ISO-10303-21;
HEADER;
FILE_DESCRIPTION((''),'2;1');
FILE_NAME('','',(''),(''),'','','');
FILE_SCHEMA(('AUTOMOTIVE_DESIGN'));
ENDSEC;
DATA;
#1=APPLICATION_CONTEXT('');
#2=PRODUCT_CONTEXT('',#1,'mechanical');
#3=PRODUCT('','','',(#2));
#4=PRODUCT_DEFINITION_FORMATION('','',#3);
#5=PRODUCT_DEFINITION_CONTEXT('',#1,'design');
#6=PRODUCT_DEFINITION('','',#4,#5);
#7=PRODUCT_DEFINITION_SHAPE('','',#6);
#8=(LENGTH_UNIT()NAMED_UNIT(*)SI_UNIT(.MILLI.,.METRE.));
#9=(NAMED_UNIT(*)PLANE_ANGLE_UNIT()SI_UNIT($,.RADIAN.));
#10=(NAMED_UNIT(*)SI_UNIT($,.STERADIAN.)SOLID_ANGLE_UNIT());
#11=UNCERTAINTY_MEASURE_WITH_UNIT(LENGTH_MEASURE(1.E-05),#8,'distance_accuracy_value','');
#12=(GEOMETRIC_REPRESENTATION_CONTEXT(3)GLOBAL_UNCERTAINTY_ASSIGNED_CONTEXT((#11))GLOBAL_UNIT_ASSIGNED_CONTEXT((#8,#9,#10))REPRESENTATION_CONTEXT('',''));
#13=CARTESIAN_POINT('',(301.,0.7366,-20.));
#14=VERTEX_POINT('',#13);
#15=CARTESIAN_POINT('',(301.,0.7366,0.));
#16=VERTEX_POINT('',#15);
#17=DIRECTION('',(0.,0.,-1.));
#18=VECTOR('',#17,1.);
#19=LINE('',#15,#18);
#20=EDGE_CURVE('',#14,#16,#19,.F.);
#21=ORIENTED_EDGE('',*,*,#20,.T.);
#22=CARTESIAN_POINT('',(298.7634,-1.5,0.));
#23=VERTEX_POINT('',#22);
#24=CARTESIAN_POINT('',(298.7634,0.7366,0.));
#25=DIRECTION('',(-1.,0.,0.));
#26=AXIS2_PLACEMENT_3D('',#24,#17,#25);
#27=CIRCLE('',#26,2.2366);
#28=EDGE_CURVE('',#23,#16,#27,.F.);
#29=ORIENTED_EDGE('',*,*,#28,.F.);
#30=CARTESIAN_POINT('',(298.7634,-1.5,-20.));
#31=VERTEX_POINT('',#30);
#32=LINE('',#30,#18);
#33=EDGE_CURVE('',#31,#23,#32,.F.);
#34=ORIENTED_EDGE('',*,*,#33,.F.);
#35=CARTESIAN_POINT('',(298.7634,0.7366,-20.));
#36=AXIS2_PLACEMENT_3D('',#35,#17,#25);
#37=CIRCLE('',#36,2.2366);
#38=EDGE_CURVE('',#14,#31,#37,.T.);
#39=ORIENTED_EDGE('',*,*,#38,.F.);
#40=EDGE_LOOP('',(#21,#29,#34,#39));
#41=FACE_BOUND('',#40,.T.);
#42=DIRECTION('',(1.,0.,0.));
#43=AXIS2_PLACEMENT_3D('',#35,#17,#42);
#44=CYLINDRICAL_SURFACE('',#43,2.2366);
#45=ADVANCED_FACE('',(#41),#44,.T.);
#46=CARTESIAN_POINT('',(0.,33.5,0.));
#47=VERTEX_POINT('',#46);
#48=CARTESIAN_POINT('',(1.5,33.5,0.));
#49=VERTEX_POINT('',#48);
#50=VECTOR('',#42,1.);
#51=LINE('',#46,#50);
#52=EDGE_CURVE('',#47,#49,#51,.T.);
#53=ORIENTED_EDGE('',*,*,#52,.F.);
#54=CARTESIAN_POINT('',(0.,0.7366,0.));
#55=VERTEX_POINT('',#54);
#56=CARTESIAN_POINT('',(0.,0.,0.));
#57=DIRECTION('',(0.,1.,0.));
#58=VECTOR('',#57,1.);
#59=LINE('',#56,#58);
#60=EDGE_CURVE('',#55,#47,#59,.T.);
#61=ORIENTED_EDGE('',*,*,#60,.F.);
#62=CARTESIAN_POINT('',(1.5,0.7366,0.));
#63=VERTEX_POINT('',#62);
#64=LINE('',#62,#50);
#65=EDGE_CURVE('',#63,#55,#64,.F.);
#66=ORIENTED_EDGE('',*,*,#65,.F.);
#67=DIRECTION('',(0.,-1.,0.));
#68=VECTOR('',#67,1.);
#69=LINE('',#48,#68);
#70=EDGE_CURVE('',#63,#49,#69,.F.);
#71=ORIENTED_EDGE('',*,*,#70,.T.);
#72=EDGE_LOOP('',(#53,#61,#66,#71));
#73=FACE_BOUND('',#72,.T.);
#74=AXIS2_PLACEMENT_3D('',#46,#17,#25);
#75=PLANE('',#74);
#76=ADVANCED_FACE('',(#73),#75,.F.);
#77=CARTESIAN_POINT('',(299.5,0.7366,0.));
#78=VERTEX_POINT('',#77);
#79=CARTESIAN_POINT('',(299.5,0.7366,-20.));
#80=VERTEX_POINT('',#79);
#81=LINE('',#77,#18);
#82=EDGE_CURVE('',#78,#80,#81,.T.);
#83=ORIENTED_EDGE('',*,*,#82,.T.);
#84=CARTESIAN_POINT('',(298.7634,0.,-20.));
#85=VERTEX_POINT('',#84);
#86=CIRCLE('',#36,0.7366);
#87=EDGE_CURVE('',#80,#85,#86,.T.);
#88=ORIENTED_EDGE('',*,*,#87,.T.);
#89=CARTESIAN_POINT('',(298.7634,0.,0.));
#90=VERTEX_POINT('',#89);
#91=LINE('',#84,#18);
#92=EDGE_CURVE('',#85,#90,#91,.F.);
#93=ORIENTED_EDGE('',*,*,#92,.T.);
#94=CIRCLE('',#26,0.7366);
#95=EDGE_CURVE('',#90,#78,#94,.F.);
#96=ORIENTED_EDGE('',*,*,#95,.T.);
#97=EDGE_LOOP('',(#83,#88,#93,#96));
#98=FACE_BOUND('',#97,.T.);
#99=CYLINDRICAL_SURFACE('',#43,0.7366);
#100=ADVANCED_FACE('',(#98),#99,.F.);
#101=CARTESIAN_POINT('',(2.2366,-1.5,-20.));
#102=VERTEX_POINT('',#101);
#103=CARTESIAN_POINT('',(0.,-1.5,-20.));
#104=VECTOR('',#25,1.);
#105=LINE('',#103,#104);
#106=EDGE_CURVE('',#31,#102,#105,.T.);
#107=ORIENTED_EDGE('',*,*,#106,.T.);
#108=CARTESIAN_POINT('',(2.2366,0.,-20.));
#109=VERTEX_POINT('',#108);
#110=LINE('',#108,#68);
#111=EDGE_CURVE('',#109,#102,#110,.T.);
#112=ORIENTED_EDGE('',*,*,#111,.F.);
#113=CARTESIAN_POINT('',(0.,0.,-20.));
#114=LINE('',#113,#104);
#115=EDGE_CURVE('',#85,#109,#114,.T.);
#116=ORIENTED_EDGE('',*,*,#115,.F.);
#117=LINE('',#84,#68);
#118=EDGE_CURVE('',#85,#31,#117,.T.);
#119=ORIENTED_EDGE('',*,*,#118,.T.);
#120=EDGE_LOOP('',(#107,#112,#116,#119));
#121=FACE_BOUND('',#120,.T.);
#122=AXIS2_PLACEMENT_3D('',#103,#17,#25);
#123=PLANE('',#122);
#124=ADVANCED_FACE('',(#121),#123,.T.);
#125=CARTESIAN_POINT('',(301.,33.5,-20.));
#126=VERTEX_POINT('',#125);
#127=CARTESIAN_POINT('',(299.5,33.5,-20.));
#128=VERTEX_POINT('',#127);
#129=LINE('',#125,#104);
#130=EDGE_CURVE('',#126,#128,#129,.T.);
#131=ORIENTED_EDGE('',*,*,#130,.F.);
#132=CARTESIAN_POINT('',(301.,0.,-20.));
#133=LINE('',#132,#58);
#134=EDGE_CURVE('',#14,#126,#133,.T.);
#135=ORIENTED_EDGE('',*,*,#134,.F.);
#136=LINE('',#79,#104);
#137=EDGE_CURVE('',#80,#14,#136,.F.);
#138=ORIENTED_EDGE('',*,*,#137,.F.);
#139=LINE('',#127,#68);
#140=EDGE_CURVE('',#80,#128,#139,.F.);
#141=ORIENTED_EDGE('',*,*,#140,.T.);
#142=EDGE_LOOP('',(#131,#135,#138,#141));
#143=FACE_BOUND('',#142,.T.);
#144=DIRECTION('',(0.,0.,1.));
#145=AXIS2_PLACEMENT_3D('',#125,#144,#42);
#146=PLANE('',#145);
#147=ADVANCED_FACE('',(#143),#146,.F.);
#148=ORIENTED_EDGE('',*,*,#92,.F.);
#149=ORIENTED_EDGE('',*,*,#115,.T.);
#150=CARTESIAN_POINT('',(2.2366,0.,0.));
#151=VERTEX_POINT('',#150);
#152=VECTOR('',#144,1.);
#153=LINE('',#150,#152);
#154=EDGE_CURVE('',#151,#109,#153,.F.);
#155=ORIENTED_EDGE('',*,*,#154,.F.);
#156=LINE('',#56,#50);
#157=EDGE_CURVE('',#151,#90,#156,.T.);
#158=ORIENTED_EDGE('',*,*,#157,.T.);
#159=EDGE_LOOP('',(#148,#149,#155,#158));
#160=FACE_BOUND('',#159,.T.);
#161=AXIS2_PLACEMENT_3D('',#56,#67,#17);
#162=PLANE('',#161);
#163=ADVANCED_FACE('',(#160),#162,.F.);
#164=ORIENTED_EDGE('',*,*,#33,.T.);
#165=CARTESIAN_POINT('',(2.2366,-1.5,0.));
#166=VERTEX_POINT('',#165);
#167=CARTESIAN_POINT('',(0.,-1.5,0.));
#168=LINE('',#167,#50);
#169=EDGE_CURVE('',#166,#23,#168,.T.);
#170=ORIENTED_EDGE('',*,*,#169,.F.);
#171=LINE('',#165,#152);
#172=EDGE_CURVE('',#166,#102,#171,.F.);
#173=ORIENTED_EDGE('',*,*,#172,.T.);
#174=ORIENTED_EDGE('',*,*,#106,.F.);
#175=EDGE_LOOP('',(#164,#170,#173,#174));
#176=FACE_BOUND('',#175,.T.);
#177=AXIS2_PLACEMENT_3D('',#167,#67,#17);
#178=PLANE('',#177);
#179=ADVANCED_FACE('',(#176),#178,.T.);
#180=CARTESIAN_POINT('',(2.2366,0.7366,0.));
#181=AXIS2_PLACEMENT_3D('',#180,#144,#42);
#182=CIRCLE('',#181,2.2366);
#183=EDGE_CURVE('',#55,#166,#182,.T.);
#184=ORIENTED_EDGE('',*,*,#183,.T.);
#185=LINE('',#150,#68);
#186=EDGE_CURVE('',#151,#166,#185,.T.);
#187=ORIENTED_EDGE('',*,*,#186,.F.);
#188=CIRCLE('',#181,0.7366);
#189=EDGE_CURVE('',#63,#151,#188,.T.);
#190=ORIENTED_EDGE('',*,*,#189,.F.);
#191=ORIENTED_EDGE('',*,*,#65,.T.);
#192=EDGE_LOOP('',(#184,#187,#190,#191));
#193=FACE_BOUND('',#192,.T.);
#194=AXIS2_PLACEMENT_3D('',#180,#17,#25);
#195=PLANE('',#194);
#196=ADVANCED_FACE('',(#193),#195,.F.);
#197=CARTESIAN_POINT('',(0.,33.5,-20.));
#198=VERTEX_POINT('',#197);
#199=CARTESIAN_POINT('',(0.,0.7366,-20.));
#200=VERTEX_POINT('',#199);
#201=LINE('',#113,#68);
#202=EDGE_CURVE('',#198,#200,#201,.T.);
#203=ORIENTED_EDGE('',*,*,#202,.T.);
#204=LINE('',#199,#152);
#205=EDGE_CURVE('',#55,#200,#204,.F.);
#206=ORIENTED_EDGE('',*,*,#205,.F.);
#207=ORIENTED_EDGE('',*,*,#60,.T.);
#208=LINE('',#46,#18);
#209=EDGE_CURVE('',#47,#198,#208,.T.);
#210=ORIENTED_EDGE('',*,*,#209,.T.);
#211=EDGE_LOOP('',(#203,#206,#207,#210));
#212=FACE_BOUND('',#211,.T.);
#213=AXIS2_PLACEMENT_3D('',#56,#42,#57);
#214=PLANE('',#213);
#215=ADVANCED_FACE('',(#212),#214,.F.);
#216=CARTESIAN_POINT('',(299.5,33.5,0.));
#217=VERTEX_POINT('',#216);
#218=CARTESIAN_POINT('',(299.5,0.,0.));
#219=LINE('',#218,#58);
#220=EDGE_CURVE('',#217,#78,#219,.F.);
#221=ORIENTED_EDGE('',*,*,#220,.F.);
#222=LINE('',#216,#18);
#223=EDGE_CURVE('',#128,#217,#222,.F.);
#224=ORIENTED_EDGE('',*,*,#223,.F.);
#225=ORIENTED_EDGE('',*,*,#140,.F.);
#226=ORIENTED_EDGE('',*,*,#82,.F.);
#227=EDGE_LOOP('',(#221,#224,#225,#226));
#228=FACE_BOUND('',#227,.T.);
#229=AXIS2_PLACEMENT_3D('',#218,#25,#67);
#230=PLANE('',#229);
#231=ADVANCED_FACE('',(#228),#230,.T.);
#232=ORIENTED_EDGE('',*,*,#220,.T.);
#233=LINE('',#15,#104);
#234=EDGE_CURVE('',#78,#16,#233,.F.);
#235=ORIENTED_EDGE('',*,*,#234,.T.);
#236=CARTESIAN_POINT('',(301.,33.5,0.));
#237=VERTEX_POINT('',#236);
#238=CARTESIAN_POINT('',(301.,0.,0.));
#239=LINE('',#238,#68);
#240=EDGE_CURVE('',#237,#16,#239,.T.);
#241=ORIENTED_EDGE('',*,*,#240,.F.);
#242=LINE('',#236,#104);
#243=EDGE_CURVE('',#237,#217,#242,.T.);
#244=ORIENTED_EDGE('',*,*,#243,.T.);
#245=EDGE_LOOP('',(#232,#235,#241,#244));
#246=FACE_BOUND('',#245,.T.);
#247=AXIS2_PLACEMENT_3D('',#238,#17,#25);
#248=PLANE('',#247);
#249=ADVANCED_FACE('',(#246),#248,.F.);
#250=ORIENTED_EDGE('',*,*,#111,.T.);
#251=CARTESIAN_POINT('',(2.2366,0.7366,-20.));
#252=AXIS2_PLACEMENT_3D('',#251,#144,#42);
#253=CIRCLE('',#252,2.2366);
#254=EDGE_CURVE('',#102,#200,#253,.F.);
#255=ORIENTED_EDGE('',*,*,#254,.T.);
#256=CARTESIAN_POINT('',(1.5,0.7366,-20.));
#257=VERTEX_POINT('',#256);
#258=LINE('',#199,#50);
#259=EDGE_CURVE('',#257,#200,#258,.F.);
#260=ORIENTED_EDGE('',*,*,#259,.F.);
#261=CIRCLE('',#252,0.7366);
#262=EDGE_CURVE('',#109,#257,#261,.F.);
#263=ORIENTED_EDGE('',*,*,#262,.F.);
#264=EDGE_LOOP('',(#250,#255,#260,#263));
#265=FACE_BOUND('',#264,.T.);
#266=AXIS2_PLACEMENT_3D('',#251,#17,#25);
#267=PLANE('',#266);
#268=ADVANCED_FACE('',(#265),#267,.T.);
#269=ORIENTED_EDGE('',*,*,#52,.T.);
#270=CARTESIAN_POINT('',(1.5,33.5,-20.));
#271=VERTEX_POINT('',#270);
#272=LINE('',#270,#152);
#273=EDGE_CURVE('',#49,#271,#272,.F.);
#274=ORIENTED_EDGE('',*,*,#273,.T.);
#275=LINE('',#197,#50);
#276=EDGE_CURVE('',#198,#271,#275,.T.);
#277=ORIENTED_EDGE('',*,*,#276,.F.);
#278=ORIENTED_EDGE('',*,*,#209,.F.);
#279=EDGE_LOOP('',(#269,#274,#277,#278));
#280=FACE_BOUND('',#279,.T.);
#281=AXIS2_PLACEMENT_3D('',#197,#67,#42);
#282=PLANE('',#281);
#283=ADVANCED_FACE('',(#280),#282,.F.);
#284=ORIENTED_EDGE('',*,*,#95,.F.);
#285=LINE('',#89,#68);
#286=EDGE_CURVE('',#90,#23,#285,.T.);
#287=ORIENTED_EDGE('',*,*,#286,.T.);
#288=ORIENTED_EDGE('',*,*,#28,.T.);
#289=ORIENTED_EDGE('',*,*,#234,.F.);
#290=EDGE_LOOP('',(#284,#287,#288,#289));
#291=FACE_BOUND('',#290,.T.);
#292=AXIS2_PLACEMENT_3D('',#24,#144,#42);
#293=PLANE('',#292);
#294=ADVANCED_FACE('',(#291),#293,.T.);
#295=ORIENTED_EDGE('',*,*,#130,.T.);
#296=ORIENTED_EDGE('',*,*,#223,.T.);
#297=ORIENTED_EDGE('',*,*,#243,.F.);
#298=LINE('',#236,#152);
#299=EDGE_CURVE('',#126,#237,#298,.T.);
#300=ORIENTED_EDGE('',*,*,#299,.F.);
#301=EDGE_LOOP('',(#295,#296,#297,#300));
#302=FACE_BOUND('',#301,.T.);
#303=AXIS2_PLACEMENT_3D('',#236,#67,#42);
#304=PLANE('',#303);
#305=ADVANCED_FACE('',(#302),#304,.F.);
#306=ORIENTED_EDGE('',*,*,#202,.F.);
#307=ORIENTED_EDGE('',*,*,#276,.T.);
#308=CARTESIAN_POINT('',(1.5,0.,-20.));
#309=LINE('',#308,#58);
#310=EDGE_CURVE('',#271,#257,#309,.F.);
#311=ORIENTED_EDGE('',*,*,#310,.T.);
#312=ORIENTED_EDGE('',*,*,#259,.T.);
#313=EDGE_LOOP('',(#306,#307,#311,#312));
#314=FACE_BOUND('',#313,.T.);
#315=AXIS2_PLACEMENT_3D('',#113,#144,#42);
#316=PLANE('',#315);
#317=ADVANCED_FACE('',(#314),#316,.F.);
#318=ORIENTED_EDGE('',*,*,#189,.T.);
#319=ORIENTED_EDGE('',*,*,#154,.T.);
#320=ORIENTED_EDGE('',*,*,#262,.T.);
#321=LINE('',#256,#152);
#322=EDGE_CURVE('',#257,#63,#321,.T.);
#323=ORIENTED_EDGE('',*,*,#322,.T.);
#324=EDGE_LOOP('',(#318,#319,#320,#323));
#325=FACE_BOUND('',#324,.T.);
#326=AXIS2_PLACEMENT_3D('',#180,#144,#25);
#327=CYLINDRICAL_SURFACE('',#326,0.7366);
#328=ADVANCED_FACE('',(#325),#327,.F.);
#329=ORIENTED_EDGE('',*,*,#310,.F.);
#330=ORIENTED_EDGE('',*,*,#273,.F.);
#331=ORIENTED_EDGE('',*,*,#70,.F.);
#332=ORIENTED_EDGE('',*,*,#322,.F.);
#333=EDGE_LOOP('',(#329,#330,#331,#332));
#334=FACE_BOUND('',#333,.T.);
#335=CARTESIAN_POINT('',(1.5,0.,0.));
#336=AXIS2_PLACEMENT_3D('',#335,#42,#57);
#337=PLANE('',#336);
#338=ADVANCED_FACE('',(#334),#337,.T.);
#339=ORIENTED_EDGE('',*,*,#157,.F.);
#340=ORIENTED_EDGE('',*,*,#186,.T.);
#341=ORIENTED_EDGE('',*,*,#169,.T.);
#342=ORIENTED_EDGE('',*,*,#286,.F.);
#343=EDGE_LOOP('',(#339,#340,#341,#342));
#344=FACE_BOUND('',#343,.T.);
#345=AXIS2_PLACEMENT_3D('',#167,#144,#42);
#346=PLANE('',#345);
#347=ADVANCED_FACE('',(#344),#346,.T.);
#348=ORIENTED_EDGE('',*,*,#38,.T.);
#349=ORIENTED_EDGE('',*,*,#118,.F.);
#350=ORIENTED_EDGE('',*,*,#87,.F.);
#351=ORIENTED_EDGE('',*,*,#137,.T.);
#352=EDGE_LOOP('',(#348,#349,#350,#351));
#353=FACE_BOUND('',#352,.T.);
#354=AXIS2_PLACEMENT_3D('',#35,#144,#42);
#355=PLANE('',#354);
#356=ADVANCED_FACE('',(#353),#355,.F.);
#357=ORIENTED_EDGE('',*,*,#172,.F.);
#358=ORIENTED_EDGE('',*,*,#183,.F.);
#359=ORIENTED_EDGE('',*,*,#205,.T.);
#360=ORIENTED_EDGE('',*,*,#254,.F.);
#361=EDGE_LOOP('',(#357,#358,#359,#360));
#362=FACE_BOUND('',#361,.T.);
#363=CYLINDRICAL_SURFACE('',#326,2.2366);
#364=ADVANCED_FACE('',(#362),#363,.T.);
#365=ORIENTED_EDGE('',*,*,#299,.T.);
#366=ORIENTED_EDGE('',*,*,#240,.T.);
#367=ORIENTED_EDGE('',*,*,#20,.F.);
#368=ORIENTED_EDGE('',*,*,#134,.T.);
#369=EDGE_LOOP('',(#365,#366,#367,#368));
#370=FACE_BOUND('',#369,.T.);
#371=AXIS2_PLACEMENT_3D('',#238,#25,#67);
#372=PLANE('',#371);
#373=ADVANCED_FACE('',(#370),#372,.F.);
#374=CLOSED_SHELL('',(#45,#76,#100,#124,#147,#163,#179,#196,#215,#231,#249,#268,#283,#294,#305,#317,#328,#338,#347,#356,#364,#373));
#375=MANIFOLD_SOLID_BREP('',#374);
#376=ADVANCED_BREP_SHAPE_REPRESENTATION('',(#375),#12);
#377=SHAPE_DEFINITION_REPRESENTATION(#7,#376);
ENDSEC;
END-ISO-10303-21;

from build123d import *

# Parameters (mm, degrees)
SKETCH_1_W                       = 301
SKETCH_1_H                       = 20
SM_BASE_FLANGE_1_DEPTH           = 1.5
SM_EDGE_FLANGE_1_STRIP_W         = 7.4732
SM_EDGE_FLANGE_1_STRIP_H         = 1.5
SM_EDGE_FLANGE_1_STRIP_CUT_DEPTH = 20
SM_EDGE_FLANGE_1_DEPTH           = 20
SM_EDGE_FLANGE_2_STRIP_W         = 7.4732
SM_EDGE_FLANGE_2_STRIP_H         = 1.5
SM_EDGE_FLANGE_2_STRIP_CUT_DEPTH = 20
SM_EDGE_FLANGE_2_DEPTH           = 20


# Sheet-metal steps are written as plain solids
with BuildPart() as part:
    # Sketch 1 → Базовая кромка1 (new body)
    with BuildSketch(Plane(origin=(0, 0, 0), x_dir=(1, 0, 0), z_dir=(0, 1, 0))):
        with Locations((150.5, 10)):
            Rectangle(SKETCH_1_W, SKETCH_1_H)
    extrude(amount=-SM_BASE_FLANGE_1_DEPTH)

    # Ребро-кромка1 strip (across the edge) → Ребро-кромка1 strip cut (cut)
    with BuildSketch(Plane.XY.offset(-20)):
        with Locations((-1.5, -0.75)):
            Rectangle(SM_EDGE_FLANGE_1_STRIP_W, SM_EDGE_FLANGE_1_STRIP_H)
    extrude(amount=SM_EDGE_FLANGE_1_STRIP_CUT_DEPTH, mode=Mode.SUBTRACT)

    # Ребро-кромка1 section (across the edge) → Ребро-кромка1 (add)
    with BuildSketch(Plane.XY.offset(-20)):
        with BuildLine():
            Line((0, 0.7366), (0, 33.5))
            Line((0, 33.5), (1.5, 33.5))
            Line((1.5, 33.5), (1.5, 0.7366))
            ThreePointArc((1.5, 0.7366), (1.715745145, 0.215745145), (2.2366, 0))
            Line((2.2366, 0), (2.2366, -1.5))
            ThreePointArc((2.2366, -1.5), (0.655084973, -0.844915027), (0, 0.7366))
        make_face()
    extrude(amount=SM_EDGE_FLANGE_1_DEPTH)

    # Ребро-кромка2 strip (across the edge) → Ребро-кромка2 strip cut (cut)
    with BuildSketch(Plane(origin=(301, 0, 0), x_dir=(-1, 0, 0), z_dir=(0, 0, -1))):
        with Locations((-1.5, -0.75)):
            Rectangle(SM_EDGE_FLANGE_2_STRIP_W, SM_EDGE_FLANGE_2_STRIP_H)
    extrude(amount=SM_EDGE_FLANGE_2_STRIP_CUT_DEPTH, mode=Mode.SUBTRACT)

    # Ребро-кромка2 section (across the edge) → Ребро-кромка2 (add)
    with BuildSketch(Plane(origin=(301, 0, 0), x_dir=(-1, 0, 0), z_dir=(0, 0, -1))):
        with BuildLine():
            Line((0, 0.7366), (0, 33.5))
            Line((0, 33.5), (1.5, 33.5))
            Line((1.5, 33.5), (1.5, 0.7366))
            ThreePointArc((1.5, 0.7366), (1.715745145, 0.215745145), (2.2366, 0))
            Line((2.2366, 0), (2.2366, -1.5))
            ThreePointArc((2.2366, -1.5), (0.655084973, -0.844915027), (0, 0.7366))
        make_face()
    extrude(amount=SM_EDGE_FLANGE_2_DEPTH)


solid = part.part
